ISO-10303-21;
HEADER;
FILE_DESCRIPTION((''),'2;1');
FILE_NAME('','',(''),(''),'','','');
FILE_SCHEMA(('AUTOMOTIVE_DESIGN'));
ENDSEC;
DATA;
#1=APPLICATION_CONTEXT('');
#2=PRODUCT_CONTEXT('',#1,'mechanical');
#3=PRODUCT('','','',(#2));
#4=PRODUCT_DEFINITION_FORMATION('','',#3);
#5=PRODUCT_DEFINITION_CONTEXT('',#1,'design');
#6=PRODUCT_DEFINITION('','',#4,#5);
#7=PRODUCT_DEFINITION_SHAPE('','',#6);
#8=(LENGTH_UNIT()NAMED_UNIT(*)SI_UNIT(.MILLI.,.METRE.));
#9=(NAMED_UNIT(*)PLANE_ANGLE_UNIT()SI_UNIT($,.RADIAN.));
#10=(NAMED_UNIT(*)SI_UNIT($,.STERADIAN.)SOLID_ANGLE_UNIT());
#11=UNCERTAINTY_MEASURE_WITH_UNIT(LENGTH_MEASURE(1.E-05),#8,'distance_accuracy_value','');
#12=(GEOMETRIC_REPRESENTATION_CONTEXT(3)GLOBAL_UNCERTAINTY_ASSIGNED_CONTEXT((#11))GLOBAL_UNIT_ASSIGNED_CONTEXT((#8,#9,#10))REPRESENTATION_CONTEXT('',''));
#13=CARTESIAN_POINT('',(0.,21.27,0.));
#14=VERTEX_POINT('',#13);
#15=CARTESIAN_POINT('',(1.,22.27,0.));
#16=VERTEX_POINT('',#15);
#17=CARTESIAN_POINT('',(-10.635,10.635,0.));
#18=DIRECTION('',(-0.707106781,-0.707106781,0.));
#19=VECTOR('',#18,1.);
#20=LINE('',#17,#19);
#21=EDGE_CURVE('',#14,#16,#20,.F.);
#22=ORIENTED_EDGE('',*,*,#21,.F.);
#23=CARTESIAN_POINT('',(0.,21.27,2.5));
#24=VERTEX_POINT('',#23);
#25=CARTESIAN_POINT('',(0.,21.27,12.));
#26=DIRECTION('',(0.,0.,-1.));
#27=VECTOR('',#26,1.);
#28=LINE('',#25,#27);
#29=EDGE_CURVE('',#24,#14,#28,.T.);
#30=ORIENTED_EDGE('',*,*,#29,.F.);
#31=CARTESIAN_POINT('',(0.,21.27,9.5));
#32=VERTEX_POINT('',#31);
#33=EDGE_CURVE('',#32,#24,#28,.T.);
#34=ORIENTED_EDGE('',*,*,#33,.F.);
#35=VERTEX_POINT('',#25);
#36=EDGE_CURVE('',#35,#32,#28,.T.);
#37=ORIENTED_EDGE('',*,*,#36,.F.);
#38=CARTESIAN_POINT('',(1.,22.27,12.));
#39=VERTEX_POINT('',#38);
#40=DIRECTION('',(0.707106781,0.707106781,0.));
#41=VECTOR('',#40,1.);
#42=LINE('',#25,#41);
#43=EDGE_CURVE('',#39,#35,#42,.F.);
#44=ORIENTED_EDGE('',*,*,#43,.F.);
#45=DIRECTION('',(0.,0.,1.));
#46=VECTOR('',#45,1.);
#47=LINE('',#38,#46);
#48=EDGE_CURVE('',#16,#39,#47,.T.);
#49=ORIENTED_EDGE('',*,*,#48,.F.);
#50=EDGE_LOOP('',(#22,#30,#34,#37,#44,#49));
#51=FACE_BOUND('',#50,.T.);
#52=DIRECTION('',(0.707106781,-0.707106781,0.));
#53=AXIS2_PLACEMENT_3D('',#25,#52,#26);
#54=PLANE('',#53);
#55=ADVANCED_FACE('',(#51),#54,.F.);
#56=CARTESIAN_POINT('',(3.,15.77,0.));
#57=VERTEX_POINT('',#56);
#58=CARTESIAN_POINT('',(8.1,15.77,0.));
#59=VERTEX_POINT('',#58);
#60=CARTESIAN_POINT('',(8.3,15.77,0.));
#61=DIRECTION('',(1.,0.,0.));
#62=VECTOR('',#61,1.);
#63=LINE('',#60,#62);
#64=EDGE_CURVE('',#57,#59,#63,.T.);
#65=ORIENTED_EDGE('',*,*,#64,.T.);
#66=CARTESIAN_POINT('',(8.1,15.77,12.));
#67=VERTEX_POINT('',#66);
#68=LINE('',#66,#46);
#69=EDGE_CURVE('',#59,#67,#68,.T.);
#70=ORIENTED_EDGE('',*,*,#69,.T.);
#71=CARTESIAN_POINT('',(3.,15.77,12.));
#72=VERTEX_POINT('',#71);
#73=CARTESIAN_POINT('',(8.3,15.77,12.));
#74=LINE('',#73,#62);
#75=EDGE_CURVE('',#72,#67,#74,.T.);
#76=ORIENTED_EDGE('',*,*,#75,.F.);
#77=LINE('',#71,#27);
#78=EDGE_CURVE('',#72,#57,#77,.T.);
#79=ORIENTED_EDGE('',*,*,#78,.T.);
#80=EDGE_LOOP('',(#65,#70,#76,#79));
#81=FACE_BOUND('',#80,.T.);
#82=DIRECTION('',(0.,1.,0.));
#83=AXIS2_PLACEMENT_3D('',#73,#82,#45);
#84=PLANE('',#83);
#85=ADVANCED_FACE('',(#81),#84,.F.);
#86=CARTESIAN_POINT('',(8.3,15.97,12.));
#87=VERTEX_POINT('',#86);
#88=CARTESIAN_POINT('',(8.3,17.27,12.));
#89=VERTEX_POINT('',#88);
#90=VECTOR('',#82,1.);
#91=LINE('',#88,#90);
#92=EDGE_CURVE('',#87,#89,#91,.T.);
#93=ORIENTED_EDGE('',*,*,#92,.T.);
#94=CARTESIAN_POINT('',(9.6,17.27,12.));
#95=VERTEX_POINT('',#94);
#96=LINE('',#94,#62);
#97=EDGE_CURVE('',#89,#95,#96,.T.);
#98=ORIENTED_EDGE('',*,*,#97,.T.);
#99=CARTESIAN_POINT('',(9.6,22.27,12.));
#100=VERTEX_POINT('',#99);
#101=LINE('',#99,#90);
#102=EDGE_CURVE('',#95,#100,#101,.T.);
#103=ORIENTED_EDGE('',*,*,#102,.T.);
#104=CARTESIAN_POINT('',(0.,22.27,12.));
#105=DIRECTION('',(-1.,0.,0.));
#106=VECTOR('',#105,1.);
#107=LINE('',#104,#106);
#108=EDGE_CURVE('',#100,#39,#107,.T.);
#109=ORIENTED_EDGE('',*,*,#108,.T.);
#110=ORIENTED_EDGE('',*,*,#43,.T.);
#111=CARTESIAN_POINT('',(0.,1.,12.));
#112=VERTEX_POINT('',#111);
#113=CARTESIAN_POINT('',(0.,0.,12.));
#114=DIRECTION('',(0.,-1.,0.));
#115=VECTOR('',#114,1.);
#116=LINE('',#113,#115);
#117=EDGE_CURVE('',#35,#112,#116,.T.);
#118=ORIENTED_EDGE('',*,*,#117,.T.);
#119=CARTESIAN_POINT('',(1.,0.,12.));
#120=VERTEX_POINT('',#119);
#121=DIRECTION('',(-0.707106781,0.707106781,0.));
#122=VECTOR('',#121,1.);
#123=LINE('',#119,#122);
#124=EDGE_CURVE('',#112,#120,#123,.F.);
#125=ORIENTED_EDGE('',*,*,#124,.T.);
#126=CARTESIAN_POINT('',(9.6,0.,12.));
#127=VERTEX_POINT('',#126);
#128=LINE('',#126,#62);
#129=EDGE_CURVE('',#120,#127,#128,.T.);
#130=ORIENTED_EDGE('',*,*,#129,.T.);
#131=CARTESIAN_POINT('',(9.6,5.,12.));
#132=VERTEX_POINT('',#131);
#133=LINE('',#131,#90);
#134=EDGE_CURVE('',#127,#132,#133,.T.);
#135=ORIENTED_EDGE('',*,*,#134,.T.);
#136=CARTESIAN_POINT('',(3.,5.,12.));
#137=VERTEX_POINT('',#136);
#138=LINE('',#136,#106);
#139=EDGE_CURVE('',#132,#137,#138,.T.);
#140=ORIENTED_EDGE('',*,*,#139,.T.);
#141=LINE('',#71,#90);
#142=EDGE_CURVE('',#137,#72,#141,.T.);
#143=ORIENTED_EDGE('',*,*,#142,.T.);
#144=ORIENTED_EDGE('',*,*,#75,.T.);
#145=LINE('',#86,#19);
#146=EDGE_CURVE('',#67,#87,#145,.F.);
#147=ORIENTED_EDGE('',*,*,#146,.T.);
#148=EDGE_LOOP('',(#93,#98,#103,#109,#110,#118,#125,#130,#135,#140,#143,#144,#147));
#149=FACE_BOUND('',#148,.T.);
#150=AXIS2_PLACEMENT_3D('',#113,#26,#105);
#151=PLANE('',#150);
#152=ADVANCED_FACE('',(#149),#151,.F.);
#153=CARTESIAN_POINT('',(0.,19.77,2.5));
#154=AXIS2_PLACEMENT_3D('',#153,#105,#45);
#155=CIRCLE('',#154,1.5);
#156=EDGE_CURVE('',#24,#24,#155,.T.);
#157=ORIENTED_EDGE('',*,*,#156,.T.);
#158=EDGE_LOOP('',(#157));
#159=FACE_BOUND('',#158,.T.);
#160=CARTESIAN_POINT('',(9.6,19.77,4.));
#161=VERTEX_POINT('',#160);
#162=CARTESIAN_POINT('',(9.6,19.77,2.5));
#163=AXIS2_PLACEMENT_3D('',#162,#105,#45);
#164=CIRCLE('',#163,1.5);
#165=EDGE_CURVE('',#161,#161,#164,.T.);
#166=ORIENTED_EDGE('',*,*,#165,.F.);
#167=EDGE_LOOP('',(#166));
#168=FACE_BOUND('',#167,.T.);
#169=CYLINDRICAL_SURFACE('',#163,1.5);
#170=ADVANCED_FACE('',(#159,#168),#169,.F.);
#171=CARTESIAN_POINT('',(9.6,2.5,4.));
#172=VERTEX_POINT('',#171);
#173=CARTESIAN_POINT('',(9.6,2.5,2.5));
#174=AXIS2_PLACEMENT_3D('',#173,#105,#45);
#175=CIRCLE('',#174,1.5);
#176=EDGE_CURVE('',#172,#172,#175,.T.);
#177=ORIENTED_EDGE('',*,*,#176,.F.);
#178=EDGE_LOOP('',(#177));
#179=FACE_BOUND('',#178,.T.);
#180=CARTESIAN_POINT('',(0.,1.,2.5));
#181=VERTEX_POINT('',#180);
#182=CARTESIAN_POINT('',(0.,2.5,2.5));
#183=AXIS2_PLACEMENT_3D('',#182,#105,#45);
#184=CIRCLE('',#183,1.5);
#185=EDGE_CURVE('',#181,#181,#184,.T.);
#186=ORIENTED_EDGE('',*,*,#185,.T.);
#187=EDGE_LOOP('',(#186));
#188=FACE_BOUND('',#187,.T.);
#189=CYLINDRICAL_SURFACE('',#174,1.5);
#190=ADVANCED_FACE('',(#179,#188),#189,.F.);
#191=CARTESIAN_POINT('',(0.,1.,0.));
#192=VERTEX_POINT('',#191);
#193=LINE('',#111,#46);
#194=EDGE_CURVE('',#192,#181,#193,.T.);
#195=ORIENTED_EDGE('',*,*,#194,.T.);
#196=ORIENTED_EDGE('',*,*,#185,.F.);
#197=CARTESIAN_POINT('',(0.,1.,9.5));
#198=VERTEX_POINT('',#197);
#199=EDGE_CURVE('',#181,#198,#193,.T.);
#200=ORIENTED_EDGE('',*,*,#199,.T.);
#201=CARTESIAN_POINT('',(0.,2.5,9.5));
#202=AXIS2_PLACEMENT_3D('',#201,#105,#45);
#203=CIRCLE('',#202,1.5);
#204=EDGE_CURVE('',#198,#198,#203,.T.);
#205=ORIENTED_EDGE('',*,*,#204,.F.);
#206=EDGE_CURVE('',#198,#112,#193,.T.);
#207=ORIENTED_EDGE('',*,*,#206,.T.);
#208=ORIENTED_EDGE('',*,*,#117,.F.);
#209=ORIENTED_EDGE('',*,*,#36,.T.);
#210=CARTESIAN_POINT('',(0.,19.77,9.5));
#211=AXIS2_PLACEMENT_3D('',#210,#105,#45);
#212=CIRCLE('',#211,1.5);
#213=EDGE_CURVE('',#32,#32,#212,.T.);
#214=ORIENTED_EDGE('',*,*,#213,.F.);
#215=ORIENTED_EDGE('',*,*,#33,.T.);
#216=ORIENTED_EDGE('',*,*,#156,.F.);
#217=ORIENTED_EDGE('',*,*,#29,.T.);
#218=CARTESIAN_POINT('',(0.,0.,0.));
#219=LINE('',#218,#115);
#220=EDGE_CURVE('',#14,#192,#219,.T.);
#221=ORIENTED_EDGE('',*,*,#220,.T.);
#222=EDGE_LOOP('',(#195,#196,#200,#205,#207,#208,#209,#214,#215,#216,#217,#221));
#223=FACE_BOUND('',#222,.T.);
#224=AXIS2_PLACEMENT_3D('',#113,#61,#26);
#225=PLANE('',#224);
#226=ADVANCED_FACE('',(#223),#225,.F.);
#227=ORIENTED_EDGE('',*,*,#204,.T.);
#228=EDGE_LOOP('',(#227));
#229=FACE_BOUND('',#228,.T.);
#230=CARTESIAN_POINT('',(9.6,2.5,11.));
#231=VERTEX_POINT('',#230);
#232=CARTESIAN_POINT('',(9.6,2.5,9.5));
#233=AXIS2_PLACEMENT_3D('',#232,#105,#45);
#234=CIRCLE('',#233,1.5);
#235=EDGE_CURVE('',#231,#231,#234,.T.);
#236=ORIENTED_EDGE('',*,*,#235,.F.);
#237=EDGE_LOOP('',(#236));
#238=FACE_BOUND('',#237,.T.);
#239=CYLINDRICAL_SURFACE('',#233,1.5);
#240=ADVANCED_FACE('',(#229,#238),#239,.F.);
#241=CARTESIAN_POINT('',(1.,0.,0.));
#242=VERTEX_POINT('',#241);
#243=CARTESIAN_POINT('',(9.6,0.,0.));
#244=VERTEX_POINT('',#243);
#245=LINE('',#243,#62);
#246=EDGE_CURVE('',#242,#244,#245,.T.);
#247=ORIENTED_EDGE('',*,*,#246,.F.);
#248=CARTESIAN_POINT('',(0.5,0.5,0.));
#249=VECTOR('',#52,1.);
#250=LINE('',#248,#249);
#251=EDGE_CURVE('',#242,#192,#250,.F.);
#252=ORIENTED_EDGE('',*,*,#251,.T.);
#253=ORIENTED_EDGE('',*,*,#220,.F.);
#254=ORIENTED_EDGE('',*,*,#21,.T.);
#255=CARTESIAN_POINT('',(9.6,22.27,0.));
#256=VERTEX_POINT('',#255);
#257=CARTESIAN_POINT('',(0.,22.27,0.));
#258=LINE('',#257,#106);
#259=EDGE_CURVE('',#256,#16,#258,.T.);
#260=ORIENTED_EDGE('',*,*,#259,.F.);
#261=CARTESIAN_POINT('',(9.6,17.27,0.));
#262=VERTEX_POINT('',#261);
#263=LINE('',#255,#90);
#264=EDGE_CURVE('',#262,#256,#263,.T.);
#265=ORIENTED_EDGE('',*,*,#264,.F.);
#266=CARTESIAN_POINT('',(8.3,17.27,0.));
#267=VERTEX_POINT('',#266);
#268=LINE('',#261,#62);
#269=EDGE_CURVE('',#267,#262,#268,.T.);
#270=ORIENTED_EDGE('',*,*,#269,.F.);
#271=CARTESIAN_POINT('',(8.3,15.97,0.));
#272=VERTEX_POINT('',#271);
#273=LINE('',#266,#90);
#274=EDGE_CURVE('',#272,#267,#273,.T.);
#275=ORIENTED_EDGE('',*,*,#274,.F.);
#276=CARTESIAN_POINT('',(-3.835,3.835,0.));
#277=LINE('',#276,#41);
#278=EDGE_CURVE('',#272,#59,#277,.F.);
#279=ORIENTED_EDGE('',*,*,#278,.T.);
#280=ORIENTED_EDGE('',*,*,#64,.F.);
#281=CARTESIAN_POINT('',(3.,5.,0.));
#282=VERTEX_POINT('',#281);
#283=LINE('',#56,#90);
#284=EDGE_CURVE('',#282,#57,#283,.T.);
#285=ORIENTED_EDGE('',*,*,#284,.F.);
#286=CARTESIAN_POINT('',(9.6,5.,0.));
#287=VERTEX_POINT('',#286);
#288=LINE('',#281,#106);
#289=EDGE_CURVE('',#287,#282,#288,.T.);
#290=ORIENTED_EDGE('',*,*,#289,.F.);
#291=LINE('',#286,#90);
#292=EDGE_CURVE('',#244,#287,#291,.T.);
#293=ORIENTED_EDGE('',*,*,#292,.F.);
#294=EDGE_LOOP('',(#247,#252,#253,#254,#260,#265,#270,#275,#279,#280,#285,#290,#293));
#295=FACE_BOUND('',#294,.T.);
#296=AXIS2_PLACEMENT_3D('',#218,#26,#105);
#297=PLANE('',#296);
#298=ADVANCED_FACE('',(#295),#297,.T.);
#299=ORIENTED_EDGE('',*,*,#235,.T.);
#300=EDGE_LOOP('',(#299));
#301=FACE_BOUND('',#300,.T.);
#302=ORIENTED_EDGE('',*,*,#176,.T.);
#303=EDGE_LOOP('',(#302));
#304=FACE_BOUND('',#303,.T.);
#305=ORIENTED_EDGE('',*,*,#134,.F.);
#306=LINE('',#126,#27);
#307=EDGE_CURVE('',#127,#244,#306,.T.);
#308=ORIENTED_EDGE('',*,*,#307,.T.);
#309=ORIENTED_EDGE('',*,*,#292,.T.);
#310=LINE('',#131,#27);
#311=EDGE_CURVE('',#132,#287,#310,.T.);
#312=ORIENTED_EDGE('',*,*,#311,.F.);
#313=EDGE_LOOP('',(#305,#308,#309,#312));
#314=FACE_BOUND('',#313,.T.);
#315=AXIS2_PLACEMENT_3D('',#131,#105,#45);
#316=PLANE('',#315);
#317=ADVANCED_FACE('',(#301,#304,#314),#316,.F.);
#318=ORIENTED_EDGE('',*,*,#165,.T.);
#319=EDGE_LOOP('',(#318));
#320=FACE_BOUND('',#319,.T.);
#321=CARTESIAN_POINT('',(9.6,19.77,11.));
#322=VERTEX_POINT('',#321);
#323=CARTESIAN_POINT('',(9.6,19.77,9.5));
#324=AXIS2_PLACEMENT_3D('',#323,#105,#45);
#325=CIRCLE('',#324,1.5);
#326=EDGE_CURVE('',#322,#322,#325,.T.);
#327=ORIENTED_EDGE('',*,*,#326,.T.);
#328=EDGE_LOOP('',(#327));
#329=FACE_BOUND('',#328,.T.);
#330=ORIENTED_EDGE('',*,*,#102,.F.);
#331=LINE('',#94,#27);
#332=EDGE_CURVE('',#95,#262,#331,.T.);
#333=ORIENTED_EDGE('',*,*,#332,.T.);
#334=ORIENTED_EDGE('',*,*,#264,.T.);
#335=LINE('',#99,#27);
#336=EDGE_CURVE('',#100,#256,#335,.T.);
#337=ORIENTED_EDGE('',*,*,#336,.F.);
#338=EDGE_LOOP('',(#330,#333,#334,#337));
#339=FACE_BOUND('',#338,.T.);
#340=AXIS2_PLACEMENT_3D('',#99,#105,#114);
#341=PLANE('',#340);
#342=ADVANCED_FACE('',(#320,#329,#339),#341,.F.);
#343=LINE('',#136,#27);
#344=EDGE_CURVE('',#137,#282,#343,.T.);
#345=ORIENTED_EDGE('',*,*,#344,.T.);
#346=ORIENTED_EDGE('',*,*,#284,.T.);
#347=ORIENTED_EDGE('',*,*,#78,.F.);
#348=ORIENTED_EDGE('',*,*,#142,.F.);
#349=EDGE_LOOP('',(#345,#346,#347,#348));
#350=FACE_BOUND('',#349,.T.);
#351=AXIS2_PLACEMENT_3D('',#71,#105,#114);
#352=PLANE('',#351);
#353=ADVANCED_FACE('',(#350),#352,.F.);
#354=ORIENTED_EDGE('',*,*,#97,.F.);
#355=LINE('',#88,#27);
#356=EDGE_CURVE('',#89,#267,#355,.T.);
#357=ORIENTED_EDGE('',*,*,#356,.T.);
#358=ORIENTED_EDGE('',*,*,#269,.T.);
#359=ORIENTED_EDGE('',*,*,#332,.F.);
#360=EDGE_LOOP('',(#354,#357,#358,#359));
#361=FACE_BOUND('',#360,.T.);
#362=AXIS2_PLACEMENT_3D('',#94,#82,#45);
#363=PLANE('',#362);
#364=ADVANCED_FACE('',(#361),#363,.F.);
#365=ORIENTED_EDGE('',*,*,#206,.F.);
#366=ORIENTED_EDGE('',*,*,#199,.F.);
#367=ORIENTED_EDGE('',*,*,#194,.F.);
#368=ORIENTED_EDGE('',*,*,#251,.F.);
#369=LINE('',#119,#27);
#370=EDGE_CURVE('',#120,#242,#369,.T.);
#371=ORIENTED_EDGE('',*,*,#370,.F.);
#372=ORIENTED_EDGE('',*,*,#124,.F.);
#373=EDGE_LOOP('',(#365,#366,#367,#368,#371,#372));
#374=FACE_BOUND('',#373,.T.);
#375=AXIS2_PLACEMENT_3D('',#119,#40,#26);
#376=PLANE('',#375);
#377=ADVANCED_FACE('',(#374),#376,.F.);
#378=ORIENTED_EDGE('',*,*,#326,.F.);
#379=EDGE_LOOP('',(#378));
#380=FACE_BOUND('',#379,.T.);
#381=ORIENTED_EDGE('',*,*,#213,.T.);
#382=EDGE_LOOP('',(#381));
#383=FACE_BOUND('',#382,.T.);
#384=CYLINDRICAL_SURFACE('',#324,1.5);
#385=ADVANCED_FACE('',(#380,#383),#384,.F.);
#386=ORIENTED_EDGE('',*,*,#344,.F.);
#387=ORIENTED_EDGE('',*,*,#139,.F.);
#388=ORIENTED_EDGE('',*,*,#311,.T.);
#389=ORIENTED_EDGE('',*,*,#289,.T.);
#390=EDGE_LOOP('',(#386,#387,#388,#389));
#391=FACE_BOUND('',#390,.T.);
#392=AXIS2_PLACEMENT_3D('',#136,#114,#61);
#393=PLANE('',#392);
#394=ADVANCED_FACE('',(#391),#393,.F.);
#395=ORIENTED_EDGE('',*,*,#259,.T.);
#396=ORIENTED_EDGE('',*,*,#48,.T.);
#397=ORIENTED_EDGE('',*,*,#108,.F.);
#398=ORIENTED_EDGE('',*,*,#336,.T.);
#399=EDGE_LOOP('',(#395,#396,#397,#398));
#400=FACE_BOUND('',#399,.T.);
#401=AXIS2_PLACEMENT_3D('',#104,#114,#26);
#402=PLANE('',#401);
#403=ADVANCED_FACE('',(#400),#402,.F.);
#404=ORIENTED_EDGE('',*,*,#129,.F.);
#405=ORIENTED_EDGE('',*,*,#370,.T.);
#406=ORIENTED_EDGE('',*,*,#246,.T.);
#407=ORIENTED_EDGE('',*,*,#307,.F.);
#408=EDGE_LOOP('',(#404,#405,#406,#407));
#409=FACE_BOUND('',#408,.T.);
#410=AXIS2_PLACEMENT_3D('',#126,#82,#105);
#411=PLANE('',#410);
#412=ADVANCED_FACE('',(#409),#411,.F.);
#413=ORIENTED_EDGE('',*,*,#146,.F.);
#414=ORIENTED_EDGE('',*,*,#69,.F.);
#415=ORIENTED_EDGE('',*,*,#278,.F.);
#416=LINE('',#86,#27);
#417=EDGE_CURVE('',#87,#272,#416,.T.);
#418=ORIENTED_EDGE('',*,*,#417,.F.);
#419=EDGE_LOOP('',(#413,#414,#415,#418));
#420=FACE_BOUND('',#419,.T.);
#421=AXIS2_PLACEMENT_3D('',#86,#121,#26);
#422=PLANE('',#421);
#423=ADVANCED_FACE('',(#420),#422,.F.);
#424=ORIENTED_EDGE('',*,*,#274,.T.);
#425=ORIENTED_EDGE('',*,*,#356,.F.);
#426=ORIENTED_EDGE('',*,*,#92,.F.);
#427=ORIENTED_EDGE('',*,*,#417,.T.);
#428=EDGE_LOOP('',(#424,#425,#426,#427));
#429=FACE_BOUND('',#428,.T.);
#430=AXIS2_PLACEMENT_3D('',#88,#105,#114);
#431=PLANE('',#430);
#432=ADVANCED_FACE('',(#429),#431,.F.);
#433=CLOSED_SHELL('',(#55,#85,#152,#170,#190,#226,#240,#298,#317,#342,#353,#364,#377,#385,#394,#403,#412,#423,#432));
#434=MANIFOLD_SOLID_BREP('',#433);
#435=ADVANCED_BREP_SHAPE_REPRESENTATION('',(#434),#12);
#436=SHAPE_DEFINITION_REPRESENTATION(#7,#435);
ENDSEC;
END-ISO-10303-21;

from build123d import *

# Parameters (mm, degrees)
EXTRUDE_1_DEPTH     = 12
CHAMFER_1_SIZE      = 0.2
SKETCH_2_R          = 1.5
CUT_EXTRUDE_1_DEPTH = 28.057584889
CHAMFER_2_SIZE      = 1


with BuildPart() as part:
    # 草图1 → 凸台-拉伸1 (new body)
    with BuildSketch(Plane.XY):
        Polygon((0, 0), (0, 22.27), (9.6, 22.27), (9.6, 17.27), (8.3, 17.27), (8.3, 15.77), (3, 15.77), (3, 5), (9.6, 5), (9.6, 0), align=None)
    extrude(amount=EXTRUDE_1_DEPTH)

    # 倒角1
    chamfer_1_edges = [part.edges().sort_by_distance(p)[0] for p in [
        (8.3, 15.77, 6),
    ]]
    chamfer(chamfer_1_edges, length=CHAMFER_1_SIZE)

    # 草图2 → 切除-拉伸1 (cut, through all)
    with BuildSketch(Plane.ZY):
        with Locations((9.5, 19.77)):
            Circle(SKETCH_2_R)
        with Locations((2.5, 19.77)):
            Circle(SKETCH_2_R)
        with Locations((2.5, 2.5)):
            Circle(SKETCH_2_R)
        with Locations((9.5, 2.5)):
            Circle(SKETCH_2_R)
    extrude(amount=-CUT_EXTRUDE_1_DEPTH, mode=Mode.SUBTRACT)

    # 倒角2
    chamfer_2_edges = [part.edges().sort_by_distance(p)[0] for p in [
        (0, 0, 6),
        (0, 22.27, 6),
    ]]
    chamfer(chamfer_2_edges, length=CHAMFER_2_SIZE - 0.0001)  # a hair under: the kernel refuses the full size


solid = part.part
